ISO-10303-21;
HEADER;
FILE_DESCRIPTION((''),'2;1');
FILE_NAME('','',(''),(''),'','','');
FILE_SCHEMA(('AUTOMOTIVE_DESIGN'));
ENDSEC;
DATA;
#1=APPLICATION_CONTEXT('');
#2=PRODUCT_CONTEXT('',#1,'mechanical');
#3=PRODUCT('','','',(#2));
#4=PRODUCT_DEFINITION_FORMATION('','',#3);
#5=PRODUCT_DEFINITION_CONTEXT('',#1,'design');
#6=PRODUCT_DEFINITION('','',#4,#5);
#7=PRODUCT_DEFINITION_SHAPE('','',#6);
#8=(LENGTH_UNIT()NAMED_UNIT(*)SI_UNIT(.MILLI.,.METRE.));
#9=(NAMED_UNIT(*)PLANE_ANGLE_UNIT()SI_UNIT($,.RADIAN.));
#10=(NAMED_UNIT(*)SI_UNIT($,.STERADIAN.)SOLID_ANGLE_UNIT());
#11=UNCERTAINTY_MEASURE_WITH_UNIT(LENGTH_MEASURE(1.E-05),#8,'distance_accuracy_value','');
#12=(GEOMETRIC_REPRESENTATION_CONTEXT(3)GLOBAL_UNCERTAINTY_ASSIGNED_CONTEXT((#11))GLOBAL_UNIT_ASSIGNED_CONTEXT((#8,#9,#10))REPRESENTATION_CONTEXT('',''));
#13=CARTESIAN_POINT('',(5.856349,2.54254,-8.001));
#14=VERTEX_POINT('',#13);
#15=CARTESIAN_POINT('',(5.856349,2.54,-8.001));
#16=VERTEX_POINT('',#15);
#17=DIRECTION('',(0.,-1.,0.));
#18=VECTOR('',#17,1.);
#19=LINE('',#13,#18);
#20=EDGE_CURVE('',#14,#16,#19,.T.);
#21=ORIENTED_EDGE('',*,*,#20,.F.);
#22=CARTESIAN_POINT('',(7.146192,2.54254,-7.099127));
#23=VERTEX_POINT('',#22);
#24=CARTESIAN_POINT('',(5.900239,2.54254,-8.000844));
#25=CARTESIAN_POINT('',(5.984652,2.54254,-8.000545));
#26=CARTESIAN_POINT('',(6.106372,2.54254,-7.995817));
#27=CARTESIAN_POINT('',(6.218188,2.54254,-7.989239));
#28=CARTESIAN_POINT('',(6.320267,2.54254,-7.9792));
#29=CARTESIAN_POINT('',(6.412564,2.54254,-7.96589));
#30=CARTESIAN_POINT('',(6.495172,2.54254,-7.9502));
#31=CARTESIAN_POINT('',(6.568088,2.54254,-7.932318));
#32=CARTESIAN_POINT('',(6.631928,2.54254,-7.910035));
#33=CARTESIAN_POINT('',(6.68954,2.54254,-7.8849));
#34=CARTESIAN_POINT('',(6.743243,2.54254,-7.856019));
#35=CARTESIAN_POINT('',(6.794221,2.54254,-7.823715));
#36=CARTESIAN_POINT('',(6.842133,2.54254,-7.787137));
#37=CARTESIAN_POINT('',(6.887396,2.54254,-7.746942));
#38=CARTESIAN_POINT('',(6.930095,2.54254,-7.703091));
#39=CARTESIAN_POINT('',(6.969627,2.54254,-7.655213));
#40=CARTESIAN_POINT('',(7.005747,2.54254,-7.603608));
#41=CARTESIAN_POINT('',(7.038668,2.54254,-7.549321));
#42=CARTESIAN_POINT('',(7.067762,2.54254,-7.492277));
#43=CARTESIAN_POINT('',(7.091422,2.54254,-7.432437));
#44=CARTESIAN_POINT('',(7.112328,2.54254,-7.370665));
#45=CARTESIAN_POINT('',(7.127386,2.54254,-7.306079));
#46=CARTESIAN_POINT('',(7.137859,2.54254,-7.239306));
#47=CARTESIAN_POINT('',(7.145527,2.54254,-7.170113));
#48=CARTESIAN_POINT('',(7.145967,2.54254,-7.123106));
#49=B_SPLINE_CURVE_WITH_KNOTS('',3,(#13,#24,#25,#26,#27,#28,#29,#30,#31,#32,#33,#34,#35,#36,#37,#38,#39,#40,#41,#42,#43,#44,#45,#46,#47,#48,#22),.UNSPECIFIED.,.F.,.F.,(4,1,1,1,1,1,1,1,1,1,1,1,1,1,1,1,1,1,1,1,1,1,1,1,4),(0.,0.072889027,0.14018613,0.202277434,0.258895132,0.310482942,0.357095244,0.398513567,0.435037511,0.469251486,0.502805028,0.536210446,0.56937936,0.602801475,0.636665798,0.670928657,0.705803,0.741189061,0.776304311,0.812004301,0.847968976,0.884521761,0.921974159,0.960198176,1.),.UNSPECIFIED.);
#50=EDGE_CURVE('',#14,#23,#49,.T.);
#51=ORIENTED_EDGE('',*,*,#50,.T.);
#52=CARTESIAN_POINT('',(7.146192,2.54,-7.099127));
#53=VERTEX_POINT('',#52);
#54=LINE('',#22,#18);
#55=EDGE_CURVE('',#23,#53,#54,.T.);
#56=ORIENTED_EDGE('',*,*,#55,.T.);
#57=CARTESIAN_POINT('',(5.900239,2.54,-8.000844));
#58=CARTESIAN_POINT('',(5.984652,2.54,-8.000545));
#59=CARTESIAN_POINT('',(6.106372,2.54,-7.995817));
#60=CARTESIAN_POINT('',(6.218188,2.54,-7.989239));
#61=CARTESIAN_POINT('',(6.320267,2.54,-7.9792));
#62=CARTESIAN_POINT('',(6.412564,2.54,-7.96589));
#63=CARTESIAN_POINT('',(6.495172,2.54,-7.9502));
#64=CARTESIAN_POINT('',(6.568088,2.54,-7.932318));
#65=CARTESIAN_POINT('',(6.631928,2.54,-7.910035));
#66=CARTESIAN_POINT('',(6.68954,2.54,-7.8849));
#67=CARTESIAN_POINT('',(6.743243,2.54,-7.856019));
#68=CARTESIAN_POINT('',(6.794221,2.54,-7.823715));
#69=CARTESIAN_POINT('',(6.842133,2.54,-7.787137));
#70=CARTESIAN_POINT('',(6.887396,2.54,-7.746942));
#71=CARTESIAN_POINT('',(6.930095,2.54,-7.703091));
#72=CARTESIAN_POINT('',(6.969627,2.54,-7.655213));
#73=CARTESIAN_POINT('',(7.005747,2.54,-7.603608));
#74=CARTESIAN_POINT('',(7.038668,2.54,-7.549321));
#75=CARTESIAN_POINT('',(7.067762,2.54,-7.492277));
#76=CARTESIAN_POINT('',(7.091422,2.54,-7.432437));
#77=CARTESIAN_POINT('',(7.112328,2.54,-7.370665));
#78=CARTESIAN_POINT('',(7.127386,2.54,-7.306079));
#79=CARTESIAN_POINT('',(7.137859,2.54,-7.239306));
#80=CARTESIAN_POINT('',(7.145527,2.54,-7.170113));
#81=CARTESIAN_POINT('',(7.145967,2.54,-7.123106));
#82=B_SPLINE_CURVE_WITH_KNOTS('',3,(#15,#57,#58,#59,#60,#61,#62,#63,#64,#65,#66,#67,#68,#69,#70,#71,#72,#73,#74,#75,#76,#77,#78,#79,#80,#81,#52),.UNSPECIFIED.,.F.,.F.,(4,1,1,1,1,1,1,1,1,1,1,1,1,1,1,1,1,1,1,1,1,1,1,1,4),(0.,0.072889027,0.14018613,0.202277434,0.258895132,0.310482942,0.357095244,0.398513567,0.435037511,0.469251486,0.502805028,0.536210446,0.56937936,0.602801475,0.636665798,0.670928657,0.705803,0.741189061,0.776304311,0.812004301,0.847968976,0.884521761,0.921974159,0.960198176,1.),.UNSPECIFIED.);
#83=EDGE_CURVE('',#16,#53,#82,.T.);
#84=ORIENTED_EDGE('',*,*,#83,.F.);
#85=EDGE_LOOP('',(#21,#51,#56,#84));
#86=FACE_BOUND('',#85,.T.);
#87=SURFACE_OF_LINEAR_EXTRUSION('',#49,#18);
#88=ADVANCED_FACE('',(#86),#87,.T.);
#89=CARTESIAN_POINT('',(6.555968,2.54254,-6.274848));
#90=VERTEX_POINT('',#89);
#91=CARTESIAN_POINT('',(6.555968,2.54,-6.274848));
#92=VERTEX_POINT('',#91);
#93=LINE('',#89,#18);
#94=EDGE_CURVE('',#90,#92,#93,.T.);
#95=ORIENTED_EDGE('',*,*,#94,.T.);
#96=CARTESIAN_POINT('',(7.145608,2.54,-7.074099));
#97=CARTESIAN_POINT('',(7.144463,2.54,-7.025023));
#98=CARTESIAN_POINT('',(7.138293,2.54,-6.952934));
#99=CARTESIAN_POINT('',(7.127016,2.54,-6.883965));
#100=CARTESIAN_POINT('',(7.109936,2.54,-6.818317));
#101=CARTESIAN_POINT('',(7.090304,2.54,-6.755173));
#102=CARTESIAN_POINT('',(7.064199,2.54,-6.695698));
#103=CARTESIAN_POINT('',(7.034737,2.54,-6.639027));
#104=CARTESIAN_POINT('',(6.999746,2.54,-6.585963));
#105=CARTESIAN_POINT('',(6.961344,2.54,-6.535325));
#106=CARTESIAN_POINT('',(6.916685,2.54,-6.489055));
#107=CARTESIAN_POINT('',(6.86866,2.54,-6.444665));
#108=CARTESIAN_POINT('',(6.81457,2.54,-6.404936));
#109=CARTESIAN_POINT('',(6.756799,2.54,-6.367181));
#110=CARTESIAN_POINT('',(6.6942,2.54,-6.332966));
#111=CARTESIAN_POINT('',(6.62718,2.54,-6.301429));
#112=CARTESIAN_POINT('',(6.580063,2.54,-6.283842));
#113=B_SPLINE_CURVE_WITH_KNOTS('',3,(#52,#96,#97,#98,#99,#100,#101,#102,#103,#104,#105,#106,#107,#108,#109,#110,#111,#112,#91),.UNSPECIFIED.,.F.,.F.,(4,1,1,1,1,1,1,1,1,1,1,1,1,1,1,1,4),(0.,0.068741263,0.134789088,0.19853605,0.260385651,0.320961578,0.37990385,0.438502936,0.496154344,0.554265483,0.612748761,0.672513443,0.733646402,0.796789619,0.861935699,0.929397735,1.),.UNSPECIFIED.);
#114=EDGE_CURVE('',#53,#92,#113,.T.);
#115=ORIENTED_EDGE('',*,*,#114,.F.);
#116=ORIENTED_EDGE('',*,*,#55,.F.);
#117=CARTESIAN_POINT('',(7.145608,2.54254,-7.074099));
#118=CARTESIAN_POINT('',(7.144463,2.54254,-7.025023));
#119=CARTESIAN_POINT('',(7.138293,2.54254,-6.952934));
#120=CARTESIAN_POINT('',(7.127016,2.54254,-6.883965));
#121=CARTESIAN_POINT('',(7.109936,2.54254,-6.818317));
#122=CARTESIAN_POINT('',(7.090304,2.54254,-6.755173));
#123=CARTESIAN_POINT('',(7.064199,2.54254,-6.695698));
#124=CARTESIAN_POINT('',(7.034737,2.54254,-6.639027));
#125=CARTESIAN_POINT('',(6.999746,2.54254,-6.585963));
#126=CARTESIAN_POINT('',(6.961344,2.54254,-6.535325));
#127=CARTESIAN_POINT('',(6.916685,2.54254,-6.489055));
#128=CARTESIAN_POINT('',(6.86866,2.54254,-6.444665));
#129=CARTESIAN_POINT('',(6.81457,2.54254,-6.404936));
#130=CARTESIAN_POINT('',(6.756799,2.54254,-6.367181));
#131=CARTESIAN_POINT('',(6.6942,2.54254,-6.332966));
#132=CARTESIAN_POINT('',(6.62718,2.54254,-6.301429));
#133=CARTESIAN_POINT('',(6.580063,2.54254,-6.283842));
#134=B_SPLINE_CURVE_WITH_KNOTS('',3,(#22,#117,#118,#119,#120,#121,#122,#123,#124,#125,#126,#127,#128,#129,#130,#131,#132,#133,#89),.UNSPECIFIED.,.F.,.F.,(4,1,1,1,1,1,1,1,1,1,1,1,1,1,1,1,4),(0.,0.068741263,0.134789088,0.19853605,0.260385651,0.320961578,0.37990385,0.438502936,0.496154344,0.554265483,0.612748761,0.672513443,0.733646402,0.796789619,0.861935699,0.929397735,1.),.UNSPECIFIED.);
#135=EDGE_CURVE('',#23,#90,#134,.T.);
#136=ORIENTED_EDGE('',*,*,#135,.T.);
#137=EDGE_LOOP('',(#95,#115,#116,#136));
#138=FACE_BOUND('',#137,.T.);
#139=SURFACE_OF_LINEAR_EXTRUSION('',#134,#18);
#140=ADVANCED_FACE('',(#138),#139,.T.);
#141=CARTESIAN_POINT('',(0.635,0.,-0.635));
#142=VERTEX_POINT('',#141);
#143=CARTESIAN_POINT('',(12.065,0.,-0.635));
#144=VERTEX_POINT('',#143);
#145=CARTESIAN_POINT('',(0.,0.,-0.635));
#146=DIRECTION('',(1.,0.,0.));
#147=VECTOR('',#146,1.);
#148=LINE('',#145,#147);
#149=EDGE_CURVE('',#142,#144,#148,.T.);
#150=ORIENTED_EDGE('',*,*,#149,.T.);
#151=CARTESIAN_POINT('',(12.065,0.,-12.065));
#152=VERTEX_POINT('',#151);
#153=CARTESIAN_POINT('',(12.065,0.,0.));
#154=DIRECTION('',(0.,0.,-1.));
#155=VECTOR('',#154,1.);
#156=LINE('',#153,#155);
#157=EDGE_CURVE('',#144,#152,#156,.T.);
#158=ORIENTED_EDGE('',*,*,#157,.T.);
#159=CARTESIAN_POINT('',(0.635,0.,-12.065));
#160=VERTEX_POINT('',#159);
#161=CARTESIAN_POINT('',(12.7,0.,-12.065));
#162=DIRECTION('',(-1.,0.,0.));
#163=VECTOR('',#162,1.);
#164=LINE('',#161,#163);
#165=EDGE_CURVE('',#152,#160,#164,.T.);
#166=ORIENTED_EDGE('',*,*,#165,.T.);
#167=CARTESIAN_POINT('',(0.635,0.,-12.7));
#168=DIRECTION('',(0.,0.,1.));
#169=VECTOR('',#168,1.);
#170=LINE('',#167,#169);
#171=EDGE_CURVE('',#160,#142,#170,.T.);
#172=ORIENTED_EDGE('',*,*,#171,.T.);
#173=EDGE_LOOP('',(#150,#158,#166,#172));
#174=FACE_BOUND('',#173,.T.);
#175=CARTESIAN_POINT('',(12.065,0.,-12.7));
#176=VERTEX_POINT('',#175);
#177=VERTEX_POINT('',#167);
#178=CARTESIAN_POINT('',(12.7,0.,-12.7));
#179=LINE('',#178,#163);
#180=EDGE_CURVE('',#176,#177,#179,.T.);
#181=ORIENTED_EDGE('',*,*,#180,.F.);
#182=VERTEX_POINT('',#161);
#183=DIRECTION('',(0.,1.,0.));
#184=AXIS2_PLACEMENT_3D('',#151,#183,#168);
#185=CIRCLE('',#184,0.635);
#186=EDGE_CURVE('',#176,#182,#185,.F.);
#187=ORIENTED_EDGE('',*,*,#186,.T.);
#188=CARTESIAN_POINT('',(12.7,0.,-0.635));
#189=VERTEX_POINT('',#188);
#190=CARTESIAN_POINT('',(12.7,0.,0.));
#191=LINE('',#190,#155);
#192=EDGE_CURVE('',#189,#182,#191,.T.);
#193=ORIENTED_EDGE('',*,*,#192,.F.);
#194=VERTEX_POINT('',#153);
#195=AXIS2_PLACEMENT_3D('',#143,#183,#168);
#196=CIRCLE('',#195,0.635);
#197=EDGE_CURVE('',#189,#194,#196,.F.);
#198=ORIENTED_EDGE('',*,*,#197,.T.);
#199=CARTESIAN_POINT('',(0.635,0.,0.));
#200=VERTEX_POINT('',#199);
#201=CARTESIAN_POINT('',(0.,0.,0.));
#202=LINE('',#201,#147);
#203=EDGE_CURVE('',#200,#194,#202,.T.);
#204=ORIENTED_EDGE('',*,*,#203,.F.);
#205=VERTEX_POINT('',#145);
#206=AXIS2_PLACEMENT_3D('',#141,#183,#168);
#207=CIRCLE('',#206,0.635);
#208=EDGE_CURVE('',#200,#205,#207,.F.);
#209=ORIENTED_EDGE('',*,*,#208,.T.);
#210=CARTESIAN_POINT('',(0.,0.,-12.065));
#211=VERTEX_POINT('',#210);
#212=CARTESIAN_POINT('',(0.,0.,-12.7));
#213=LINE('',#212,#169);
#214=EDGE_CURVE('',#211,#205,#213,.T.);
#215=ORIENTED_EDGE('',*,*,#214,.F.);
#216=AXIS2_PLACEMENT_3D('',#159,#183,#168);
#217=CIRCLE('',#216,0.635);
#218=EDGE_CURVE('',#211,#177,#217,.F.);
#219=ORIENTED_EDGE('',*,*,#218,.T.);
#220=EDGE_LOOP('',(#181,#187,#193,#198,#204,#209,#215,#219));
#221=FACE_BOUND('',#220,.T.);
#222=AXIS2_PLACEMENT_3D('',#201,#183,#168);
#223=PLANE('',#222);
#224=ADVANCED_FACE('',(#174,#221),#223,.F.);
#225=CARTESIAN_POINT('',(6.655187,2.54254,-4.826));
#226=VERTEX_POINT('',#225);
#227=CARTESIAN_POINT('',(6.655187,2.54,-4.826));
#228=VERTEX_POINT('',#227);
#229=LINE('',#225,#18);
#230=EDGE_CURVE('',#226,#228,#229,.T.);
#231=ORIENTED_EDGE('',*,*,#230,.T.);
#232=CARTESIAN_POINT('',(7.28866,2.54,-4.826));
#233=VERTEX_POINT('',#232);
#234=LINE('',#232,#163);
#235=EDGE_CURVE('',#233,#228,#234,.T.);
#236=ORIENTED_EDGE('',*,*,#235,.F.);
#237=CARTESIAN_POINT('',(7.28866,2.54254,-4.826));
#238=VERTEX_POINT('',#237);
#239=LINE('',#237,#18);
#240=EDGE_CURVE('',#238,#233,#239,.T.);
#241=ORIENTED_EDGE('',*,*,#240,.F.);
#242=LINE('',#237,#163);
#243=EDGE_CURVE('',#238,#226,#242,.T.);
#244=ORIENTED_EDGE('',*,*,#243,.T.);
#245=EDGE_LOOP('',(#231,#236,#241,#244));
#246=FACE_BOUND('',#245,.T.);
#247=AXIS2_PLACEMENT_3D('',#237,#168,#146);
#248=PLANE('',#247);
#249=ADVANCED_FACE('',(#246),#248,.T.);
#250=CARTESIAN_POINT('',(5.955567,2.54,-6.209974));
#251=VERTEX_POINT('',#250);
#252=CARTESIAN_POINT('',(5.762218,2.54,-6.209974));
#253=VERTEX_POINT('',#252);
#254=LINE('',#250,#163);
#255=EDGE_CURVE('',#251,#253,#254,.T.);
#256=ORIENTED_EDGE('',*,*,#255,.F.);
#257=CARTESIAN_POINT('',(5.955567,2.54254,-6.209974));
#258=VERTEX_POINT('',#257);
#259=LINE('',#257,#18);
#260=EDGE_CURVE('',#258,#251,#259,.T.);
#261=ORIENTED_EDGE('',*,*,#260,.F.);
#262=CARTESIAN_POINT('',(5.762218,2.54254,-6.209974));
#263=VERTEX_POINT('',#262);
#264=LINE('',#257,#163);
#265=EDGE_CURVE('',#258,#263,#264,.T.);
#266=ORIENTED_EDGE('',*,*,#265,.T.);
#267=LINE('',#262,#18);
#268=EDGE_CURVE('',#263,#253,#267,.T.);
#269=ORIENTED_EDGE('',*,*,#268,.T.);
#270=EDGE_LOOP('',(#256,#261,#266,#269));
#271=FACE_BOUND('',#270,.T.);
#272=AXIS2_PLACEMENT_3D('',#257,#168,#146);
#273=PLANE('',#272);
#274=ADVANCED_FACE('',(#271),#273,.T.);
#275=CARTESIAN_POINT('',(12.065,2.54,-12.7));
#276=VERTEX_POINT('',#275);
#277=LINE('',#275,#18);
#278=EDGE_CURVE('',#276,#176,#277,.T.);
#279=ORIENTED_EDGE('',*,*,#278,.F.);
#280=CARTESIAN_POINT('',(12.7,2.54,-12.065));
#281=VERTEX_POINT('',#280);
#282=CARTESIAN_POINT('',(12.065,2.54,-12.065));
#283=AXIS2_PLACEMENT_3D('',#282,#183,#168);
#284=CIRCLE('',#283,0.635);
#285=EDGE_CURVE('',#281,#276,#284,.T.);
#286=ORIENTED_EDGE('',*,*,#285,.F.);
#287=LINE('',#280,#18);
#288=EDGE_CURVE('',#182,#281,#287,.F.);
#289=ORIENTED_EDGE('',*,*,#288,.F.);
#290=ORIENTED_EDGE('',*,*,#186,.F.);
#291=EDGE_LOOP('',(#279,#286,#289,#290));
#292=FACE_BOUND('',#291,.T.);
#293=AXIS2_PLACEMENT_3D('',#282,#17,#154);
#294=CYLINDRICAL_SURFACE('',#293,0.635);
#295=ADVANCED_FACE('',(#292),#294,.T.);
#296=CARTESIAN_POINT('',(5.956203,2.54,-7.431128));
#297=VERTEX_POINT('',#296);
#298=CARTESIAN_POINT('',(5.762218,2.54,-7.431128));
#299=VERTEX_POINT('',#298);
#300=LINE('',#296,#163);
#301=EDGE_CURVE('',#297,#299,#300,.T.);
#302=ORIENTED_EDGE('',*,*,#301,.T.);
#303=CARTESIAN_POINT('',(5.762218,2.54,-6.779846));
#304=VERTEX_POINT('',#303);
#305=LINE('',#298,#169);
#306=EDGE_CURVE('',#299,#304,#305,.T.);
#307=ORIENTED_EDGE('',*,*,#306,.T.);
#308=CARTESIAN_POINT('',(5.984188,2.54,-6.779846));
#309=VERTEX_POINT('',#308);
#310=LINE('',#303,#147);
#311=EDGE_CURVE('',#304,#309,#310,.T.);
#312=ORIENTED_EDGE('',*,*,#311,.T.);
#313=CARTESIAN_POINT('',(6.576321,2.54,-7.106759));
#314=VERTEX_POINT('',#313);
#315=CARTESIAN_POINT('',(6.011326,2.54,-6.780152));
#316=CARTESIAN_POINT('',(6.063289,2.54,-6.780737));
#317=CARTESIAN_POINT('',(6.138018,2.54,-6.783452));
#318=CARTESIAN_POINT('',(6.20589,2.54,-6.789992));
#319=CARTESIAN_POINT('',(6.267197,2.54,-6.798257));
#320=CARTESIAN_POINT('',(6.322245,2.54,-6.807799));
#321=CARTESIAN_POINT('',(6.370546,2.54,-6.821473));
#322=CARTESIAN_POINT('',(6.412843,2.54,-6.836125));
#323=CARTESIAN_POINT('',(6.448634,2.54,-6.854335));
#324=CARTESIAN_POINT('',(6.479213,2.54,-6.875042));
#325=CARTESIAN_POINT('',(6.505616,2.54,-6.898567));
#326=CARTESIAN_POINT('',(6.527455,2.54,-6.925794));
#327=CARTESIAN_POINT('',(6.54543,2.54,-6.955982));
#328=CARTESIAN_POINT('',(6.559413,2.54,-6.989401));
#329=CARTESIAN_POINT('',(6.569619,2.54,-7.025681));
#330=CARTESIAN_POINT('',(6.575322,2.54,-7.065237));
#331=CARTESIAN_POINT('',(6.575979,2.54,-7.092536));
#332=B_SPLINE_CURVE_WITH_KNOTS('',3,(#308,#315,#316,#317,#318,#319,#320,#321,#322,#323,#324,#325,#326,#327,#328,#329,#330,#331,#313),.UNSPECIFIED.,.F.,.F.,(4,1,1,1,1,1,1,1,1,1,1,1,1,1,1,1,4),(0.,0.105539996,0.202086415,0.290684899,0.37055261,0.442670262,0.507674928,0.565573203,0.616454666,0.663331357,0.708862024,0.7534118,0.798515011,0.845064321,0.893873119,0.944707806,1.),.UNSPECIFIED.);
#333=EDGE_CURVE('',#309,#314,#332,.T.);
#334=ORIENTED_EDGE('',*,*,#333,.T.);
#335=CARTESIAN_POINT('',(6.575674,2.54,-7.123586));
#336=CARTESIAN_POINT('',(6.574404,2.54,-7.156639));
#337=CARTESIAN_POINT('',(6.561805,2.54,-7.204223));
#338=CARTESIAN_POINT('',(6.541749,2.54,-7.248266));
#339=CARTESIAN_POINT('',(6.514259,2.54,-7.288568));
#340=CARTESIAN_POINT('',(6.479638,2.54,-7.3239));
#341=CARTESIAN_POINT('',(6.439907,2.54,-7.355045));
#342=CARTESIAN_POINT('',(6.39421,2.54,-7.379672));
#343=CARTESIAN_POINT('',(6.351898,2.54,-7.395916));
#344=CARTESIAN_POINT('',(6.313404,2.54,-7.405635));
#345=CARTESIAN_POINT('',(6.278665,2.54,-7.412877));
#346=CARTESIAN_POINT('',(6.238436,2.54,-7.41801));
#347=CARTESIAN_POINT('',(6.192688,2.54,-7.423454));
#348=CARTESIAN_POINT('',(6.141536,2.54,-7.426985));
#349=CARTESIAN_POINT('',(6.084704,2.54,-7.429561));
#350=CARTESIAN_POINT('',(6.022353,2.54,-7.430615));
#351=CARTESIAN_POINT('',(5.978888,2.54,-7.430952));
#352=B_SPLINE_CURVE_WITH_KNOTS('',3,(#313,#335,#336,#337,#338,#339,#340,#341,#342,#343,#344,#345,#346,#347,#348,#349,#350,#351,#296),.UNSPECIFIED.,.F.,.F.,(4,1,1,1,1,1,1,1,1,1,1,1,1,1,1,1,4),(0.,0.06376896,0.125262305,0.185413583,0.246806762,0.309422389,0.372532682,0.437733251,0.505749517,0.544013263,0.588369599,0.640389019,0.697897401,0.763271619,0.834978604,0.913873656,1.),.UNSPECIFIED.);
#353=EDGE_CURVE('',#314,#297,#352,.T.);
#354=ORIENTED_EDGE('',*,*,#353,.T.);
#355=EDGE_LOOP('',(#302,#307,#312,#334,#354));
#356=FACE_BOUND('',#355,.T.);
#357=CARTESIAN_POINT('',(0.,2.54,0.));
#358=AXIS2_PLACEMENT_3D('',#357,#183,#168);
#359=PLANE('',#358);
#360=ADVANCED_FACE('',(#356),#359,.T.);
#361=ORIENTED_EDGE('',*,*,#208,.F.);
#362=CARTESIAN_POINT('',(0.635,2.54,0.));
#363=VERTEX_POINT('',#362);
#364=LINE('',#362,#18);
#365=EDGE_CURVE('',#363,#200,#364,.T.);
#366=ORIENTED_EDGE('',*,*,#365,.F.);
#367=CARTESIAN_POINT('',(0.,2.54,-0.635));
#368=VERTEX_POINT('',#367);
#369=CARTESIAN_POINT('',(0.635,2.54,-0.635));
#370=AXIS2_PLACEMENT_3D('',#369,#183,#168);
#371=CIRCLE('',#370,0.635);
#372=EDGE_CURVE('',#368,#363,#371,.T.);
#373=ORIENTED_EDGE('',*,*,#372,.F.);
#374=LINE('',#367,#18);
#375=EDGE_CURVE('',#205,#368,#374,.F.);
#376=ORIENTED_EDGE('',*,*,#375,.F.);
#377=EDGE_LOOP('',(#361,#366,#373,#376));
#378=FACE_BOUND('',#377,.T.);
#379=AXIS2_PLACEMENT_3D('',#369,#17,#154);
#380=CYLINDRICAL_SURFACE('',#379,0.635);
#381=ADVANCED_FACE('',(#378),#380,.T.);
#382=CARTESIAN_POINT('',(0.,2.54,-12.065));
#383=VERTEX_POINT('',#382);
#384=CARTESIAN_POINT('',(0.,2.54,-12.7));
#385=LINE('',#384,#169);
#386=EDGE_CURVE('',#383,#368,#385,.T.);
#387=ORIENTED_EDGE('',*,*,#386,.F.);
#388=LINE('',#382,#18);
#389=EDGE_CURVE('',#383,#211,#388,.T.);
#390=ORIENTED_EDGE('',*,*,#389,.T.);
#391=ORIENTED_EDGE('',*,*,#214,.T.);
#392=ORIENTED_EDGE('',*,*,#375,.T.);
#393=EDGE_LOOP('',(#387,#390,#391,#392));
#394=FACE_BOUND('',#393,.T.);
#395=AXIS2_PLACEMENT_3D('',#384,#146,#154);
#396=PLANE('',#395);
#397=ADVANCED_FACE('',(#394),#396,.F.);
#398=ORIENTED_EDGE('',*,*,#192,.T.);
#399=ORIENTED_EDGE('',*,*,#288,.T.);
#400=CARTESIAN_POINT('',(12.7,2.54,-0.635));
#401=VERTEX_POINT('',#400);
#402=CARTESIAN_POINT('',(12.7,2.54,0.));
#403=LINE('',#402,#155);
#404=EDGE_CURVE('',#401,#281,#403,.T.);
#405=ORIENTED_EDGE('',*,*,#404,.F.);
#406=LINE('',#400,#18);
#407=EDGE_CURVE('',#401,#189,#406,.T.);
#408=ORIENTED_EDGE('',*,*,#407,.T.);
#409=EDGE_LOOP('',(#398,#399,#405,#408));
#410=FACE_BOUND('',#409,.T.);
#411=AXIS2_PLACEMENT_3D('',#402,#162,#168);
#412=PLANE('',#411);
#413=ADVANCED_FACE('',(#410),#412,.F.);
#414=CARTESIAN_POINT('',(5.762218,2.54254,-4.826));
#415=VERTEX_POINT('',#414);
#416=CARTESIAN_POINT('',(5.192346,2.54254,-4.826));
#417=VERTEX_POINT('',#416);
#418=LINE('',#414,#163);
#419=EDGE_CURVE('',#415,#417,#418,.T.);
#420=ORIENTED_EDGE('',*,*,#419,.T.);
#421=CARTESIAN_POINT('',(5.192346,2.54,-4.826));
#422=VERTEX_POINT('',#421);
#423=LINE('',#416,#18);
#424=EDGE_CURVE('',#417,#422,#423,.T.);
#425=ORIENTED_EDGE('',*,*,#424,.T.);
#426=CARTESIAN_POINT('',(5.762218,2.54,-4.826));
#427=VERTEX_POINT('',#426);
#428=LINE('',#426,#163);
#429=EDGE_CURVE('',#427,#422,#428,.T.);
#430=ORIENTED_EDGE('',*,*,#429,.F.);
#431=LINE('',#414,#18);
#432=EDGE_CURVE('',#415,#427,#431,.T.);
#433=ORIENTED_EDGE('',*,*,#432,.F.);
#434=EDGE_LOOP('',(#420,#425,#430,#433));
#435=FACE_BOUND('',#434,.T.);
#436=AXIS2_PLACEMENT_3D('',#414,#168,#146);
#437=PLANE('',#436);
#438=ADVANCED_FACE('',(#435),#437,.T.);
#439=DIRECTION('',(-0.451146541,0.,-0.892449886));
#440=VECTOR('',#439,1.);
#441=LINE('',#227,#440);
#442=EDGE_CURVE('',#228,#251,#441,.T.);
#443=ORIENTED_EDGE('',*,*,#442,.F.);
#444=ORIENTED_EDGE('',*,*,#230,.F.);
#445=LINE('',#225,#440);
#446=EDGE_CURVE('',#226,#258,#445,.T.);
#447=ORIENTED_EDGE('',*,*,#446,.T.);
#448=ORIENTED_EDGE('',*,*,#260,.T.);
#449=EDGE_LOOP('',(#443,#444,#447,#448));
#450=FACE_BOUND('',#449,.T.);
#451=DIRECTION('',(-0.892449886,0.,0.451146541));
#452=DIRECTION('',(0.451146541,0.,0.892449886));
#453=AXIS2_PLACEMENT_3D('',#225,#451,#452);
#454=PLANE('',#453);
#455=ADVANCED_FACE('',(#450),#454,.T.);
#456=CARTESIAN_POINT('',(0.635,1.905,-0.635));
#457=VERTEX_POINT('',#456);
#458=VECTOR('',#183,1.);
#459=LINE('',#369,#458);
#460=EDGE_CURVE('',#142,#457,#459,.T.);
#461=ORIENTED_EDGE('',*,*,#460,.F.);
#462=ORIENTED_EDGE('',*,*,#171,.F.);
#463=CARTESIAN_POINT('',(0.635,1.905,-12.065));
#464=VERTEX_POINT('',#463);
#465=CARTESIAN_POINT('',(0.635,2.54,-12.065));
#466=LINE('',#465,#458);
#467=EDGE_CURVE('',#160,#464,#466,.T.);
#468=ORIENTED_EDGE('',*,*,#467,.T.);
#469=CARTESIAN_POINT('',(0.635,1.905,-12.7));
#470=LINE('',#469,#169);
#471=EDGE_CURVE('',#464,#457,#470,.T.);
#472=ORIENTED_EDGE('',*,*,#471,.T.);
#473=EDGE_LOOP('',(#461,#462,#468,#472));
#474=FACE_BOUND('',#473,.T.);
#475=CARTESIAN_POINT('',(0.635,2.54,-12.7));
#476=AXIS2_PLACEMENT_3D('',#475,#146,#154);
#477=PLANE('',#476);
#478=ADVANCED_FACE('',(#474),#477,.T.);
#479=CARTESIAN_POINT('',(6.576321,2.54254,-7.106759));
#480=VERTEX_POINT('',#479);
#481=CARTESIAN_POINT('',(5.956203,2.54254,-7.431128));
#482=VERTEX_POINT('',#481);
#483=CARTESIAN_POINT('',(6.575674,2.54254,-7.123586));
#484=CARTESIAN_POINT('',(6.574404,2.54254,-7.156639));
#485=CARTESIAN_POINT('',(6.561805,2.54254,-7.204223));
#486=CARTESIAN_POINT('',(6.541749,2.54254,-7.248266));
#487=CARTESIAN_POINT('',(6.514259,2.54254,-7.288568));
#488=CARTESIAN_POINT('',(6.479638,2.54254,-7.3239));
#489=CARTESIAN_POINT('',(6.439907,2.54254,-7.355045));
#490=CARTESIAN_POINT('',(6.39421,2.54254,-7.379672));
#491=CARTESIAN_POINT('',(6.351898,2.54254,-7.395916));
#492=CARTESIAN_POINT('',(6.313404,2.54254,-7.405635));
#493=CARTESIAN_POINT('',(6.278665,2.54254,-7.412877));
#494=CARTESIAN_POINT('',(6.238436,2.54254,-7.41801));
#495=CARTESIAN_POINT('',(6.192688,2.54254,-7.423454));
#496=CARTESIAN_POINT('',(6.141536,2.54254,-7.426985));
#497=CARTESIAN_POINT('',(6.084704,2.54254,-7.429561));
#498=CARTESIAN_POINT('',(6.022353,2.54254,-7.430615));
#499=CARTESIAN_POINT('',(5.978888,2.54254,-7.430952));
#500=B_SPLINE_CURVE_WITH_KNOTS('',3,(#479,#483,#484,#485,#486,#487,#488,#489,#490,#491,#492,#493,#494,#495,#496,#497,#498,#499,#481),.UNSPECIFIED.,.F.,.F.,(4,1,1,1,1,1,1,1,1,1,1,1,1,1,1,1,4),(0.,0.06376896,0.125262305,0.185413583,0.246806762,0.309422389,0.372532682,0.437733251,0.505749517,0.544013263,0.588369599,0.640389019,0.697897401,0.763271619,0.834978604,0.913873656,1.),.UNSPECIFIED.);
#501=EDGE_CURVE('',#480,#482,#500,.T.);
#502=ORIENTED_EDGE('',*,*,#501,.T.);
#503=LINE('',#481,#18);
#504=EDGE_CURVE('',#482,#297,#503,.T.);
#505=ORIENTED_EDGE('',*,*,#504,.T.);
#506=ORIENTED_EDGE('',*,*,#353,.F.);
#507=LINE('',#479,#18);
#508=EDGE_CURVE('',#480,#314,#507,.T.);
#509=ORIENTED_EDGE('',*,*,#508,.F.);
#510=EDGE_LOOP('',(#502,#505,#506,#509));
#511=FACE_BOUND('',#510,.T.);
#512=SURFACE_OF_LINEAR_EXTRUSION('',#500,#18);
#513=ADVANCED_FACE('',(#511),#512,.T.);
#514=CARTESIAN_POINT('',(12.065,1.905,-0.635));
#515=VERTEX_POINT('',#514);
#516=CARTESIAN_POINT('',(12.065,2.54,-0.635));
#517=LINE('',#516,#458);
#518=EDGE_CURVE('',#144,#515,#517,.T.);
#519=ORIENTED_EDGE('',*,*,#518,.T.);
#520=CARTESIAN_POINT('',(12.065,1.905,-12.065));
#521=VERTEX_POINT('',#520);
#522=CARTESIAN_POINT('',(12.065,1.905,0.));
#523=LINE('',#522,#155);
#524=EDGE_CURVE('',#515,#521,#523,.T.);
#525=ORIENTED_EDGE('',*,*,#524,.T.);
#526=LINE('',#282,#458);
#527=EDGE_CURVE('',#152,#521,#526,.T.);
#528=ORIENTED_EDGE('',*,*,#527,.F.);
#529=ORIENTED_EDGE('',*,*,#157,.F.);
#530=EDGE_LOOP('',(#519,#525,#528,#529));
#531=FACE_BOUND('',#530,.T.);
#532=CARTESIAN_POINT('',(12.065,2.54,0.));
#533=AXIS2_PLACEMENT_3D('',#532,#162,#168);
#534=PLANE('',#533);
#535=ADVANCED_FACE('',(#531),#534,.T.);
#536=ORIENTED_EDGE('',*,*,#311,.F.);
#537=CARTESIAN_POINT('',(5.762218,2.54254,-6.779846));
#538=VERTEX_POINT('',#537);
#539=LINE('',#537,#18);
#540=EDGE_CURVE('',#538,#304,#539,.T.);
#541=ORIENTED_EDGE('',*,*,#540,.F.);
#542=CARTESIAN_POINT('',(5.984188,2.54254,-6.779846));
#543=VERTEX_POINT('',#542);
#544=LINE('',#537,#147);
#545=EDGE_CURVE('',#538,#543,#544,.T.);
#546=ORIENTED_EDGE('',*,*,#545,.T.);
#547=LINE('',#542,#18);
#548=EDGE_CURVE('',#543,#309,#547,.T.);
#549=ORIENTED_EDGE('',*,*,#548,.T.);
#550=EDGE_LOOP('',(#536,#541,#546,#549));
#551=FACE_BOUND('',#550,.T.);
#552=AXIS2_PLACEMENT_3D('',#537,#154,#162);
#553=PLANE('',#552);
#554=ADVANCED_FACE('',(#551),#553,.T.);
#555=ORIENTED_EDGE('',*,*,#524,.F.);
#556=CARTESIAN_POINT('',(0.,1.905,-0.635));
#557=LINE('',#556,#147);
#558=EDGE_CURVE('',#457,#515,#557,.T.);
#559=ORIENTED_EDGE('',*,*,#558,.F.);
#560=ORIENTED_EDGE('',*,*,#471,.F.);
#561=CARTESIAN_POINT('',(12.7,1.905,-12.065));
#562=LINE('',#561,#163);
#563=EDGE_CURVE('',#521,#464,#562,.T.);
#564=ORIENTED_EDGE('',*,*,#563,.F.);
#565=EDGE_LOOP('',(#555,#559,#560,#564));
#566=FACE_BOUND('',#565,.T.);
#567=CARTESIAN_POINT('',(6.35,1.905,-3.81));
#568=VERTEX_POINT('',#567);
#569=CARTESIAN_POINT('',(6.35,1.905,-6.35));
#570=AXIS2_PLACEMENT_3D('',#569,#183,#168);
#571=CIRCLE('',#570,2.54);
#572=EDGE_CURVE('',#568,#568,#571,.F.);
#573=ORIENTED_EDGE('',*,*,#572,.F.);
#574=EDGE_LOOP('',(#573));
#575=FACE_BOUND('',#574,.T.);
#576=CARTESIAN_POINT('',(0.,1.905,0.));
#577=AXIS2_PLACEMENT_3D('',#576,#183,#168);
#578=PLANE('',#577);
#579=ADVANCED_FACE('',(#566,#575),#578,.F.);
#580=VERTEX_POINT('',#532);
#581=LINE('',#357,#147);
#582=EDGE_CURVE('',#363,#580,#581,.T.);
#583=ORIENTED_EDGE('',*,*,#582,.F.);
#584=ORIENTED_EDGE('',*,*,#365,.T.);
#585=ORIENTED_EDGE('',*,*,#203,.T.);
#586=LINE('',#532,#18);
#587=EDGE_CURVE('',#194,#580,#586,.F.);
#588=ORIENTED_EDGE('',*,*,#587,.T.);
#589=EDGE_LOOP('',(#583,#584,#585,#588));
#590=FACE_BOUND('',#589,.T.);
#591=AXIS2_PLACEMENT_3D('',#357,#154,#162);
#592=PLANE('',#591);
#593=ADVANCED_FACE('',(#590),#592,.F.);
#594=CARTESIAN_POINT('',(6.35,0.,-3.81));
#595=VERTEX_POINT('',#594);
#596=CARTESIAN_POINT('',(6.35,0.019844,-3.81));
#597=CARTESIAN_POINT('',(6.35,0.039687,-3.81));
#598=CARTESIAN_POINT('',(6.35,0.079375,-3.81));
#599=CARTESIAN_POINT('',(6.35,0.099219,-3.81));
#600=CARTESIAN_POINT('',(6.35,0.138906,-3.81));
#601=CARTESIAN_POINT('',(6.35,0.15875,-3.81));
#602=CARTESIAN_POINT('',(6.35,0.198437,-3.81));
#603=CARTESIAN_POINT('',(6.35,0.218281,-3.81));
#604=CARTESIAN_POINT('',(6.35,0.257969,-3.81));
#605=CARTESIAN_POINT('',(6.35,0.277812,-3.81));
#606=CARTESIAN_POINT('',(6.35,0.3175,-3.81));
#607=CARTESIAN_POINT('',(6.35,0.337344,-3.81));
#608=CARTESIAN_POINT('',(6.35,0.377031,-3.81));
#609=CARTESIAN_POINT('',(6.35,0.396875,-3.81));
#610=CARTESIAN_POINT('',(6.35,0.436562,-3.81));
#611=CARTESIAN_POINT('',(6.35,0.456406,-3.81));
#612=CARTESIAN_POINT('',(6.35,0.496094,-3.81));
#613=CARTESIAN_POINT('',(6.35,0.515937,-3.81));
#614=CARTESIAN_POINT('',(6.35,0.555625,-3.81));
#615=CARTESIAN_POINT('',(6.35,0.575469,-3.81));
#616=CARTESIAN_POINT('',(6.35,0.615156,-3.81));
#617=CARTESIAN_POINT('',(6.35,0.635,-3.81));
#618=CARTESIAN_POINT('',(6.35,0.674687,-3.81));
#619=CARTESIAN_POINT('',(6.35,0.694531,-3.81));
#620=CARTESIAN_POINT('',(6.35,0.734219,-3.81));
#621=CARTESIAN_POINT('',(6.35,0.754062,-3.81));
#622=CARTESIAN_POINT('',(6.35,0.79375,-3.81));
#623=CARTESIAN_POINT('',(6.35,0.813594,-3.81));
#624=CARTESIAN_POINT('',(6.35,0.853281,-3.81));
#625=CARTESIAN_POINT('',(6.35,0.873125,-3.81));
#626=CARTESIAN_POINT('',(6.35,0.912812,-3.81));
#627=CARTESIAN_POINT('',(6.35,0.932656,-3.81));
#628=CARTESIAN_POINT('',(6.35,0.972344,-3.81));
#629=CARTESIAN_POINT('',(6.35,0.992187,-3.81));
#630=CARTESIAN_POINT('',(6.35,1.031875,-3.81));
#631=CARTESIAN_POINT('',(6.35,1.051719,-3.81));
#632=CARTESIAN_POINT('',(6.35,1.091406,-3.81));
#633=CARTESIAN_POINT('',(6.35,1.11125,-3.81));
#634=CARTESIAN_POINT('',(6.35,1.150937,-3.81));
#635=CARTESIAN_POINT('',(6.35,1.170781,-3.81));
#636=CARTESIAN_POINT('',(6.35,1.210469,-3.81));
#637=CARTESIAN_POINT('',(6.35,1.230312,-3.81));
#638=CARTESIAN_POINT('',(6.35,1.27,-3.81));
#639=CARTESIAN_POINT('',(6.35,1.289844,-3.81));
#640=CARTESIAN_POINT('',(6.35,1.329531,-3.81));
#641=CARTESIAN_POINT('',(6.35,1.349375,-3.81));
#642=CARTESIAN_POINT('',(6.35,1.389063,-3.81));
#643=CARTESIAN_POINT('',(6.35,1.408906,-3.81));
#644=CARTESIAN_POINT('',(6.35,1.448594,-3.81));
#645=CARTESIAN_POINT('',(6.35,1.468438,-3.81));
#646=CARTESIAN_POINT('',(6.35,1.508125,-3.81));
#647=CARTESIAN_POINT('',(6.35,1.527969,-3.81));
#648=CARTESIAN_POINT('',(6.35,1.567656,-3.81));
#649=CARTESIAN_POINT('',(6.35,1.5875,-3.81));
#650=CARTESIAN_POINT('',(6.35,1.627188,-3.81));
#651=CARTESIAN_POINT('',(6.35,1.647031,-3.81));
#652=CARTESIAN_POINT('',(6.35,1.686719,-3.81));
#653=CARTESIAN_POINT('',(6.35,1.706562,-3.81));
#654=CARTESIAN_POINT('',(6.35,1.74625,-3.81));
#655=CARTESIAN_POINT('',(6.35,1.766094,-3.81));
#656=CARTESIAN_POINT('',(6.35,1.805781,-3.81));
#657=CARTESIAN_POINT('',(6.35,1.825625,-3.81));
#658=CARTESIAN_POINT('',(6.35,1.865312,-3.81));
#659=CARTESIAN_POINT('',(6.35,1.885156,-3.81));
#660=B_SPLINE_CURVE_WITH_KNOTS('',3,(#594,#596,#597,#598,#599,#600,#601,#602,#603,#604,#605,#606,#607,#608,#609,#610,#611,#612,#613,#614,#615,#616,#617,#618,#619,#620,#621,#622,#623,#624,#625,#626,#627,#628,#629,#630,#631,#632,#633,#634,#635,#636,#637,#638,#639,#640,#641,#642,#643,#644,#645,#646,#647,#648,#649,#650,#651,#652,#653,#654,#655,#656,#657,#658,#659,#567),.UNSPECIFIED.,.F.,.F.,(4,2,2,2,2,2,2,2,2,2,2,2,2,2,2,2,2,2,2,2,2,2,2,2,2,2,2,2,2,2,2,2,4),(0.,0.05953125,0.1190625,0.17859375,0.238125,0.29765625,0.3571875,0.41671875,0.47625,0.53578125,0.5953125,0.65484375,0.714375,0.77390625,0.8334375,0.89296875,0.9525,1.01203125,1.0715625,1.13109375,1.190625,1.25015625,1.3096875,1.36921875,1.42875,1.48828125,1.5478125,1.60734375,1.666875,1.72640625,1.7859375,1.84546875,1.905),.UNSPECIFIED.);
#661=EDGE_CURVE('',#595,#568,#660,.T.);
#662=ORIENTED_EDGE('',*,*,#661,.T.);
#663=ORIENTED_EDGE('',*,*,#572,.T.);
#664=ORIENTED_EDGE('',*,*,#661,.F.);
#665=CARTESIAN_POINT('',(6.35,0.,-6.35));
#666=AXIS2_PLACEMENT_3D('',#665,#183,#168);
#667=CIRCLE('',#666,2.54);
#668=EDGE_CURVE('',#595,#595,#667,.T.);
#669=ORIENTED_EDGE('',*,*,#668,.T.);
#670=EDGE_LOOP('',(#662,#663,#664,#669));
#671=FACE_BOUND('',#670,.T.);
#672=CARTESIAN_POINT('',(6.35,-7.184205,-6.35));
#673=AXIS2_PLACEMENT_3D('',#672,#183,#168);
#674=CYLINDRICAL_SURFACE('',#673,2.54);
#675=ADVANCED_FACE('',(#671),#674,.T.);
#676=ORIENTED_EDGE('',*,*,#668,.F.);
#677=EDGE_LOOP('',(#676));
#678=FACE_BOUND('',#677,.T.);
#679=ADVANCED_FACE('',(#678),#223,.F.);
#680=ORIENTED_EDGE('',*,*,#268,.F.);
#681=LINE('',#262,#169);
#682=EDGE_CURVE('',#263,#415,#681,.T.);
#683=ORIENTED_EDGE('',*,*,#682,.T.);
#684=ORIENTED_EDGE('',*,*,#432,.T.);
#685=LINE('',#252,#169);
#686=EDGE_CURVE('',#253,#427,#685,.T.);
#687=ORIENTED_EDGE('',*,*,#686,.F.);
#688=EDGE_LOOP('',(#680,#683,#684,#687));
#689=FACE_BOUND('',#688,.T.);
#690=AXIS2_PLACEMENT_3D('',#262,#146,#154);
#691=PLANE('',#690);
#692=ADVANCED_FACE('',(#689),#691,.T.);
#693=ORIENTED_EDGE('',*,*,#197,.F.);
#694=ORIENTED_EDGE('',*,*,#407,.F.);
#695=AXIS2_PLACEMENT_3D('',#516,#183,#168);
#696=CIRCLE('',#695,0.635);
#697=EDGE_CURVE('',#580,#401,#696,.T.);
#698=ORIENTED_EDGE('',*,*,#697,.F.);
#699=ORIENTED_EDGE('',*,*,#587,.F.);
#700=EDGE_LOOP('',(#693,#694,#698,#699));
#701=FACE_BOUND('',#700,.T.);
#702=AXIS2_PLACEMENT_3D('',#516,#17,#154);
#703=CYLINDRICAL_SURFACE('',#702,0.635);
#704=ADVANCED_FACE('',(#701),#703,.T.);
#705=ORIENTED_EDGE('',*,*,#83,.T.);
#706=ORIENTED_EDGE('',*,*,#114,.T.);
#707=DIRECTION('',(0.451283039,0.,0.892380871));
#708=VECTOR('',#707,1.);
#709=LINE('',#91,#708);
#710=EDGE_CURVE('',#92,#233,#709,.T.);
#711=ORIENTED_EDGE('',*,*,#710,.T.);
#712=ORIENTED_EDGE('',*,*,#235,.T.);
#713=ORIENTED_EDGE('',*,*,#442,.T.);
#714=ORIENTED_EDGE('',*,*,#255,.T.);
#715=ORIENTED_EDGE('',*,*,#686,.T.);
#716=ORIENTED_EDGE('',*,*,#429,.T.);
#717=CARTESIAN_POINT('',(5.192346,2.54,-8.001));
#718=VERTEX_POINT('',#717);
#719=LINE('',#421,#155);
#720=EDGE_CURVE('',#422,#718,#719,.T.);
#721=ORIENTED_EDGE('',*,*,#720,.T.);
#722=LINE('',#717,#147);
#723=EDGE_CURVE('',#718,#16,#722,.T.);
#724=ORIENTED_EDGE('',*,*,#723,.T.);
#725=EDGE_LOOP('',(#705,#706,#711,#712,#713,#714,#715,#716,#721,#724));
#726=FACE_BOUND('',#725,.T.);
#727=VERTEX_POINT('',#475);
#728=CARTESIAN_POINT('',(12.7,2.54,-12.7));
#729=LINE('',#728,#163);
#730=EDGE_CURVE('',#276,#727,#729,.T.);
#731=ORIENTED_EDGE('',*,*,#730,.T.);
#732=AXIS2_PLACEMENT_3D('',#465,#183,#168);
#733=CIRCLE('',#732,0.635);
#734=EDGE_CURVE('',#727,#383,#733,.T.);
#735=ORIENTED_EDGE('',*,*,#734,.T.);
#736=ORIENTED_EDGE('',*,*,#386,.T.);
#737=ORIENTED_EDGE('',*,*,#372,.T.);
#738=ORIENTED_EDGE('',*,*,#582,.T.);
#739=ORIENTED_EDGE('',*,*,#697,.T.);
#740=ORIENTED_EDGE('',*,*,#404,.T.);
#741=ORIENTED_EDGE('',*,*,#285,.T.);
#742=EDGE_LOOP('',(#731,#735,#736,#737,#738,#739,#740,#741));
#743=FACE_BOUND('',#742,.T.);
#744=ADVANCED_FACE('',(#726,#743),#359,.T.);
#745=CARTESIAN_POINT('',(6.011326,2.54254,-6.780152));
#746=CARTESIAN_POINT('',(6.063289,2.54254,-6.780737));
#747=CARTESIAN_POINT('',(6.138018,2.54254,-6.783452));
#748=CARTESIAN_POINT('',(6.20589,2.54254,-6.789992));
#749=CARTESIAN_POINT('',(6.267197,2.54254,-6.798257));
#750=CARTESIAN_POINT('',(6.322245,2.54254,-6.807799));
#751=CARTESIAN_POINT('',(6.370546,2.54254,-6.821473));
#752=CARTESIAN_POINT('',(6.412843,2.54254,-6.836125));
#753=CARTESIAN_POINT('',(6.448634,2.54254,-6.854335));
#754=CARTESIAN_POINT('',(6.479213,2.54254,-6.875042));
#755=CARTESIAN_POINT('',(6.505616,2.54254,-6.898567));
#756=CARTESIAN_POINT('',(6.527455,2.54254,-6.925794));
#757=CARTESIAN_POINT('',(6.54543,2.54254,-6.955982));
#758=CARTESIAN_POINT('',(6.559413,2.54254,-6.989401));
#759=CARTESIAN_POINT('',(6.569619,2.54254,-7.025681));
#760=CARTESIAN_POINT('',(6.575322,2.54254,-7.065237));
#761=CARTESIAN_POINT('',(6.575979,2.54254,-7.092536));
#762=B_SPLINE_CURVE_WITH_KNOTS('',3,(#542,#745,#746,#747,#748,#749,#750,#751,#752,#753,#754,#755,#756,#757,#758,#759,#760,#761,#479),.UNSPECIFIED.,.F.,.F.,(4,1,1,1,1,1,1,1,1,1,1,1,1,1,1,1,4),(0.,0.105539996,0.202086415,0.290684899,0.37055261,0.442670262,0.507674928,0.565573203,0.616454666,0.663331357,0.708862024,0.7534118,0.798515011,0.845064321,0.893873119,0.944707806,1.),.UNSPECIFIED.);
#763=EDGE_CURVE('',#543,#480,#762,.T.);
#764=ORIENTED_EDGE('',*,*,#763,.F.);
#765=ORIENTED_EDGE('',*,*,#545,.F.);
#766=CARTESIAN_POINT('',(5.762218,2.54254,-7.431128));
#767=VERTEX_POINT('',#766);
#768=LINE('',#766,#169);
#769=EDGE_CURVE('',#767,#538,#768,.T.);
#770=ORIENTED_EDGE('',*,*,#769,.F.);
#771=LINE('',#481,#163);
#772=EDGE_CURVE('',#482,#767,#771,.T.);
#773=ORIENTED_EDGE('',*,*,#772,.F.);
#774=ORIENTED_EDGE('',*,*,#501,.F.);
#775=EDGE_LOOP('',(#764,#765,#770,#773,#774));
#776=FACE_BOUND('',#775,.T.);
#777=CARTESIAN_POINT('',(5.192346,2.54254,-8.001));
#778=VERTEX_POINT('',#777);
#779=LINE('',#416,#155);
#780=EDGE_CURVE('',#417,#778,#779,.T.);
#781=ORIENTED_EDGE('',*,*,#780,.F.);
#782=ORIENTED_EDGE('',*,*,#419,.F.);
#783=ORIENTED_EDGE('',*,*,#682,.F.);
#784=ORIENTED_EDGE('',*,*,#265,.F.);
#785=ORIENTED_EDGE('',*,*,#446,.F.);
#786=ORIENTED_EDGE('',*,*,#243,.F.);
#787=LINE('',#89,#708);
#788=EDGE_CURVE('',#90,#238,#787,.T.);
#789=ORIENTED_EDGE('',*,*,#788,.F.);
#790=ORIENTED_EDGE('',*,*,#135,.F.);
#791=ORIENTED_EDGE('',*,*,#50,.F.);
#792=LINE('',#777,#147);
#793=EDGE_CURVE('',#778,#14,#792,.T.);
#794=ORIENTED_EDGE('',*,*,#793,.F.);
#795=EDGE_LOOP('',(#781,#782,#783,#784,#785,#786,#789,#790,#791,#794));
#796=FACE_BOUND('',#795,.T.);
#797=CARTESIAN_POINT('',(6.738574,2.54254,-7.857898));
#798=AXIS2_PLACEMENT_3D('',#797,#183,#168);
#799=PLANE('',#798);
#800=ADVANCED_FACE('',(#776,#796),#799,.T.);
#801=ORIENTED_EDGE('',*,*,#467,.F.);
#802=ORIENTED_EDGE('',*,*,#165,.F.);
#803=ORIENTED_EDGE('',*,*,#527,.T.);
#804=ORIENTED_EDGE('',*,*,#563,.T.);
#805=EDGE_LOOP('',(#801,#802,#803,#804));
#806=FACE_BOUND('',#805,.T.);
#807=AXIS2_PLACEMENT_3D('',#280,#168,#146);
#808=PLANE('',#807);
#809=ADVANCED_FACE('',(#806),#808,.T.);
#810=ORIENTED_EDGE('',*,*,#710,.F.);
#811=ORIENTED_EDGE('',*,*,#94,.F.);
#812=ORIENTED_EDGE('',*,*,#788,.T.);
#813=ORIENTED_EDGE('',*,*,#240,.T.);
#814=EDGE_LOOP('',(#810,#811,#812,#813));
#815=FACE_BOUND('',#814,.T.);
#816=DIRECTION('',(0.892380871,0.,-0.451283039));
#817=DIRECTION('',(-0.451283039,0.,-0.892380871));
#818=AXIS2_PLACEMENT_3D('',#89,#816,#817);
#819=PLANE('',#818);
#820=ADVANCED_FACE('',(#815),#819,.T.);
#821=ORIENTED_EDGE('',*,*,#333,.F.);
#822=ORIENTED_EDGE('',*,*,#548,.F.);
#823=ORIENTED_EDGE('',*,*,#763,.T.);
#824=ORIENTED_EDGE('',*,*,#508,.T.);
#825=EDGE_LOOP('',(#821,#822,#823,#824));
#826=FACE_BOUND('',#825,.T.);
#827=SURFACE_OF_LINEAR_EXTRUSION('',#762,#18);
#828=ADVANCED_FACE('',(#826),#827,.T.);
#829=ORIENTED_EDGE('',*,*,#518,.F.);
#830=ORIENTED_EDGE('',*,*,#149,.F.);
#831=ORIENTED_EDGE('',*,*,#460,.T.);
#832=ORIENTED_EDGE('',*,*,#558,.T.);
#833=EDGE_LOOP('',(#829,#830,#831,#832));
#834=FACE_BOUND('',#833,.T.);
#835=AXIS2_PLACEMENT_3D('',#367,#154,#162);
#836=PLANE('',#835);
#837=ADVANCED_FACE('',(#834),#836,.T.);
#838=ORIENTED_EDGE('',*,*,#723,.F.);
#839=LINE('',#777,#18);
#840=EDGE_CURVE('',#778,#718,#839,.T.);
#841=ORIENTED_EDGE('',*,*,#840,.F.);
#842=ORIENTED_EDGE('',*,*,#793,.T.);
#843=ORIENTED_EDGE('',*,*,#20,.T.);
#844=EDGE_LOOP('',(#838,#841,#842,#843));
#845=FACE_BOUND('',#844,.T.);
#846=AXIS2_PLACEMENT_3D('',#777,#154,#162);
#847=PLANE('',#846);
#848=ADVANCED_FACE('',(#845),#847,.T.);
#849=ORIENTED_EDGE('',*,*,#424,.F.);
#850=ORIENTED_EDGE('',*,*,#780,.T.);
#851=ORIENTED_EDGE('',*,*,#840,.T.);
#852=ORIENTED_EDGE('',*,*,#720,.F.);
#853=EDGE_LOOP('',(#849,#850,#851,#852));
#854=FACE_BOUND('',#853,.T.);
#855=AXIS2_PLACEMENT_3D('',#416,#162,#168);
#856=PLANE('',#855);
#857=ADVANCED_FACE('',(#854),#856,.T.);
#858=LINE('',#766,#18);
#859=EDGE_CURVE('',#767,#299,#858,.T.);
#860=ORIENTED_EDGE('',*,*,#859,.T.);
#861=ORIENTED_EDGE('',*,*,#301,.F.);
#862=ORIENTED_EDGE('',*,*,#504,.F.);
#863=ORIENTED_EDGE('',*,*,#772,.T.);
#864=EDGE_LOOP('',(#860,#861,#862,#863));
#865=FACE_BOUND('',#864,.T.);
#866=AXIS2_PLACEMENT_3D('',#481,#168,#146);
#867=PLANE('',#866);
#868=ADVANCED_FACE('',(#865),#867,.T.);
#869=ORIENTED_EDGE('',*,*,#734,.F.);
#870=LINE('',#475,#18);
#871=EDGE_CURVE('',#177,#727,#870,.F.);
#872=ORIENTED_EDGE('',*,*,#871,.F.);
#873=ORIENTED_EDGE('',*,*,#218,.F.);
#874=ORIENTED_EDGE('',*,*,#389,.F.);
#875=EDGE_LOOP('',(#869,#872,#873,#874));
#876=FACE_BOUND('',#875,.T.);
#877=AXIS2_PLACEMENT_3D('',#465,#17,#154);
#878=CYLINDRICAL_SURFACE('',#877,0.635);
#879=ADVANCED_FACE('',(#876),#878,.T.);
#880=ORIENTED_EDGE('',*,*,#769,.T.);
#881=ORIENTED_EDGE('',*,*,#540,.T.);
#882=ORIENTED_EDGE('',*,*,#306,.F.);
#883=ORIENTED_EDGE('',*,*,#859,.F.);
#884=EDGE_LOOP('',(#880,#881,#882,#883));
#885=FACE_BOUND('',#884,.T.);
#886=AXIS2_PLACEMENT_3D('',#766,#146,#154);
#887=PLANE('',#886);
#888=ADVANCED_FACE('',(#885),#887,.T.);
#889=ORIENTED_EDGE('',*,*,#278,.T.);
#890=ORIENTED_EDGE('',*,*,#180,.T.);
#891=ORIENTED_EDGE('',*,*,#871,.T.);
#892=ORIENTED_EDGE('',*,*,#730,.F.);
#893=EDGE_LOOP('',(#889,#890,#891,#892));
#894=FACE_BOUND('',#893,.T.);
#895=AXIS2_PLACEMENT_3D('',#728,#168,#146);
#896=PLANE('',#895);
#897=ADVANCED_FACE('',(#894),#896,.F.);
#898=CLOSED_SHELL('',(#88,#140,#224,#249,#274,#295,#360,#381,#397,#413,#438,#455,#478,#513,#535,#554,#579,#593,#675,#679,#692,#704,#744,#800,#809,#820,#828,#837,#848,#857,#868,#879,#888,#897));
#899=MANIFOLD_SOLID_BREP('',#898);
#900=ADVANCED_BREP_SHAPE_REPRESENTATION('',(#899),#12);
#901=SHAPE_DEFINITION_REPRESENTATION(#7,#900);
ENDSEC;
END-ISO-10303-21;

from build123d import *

# Parameters (mm, degrees)
SKETCH1_W           = 12.7
SKETCH1_H           = 12.7
BOSS_EXTRUDE1_DEPTH = 2.54
FILLET1_R           = 0.635
SHELL1_START        = 0.635
SHELL1_OUTLINE_W    = 1.905
SHELL1_OUTLINE_H    = 11.43
SHELL1_DEPTH        = 11.43
SKETCH2_R           = 2.54
BOSS_EXTRUDE2_DEPTH = 1.905
BOSS_EXTRUDE3_DEPTH = 0.00254


# Read off the part's stored shape, not the designer's step: Shell1
with BuildPart() as part:
    # Sketch1 → Boss-Extrude1 (new body)
    with BuildSketch(Plane(origin=(0, 0, 0), x_dir=(1, 0, 0), z_dir=(0, 1, 0))):
        with Locations((6.35, 6.35)):
            Rectangle(SKETCH1_W, SKETCH1_H)
    extrude(amount=BOSS_EXTRUDE1_DEPTH)

    # Fillet1
    fillet1_edges = [part.edges().sort_by_distance(p)[0] for p in [
        (0, 1.27, -12.7),
        (12.7, 1.27, -12.7),
        (12.7, 1.27, 0),
        (0, 1.27, 0),
    ]]
    fillet(fillet1_edges, radius=FILLET1_R)

    # Shell1 outline → Shell1 (cut)
    with BuildSketch(Plane.YZ.offset(SHELL1_START)):
        with Locations((0.9525, -6.35)):
            Rectangle(SHELL1_OUTLINE_W, SHELL1_OUTLINE_H)
    extrude(amount=SHELL1_DEPTH, mode=Mode.SUBTRACT)

    # Sketch2 → Boss-Extrude2 (add)
    with BuildSketch(Plane(origin=(0, 1.905, 0), x_dir=(-1, 0, 0), z_dir=(0, -1, 0))):
        with Locations(Location((-6.35, 6.35, 0), (0, 0, 270))):
            Circle(SKETCH2_R)
    extrude(amount=BOSS_EXTRUDE2_DEPTH)

    # Sketch3 → Boss-Extrude3 (add)
    with BuildSketch(Plane(origin=(0, 2.54, 0), x_dir=(1, 0, 0), z_dir=(0, 1, 0))):
        with BuildLine():
            Line((5.192346154, 8.001), (5.856348558, 8.001))
            add(Edge.make_bspline(
                [(5.856348558, 8.001), (5.900238914, 8.000844214), (5.984652434, 8.000544595), (6.106372118, 7.995817392), (6.218188387, 7.989239101), (6.320266796, 7.979200455), (6.412563672, 7.965890424), (6.49517152, 7.950200099), (6.568087924, 7.93231761), (6.631927834, 7.910034619), (6.689540196, 7.884899742), (6.743242928, 7.856019307), (6.79422079, 7.823714908), (6.842133051, 7.787136528), (6.887396081, 7.746942202), (6.93009527, 7.703091473), (6.969627239, 7.655212502), (7.005747205, 7.603607826), (7.038667646, 7.54932089), (7.067762412, 7.492277157), (7.091422324, 7.432436959), (7.112328392, 7.370665114), (7.127386356, 7.306078583), (7.13785895, 7.239306125), (7.145526573, 7.170112696), (7.145967424, 7.123105753), (7.146192308, 7.099127003)],
                knots=[0, 0, 0, 0, 1.749336639, 3.364467119, 4.854658419, 6.213483162, 7.451590619, 8.570285859, 9.5643256, 10.440900261, 11.26203566, 12.067320669, 12.869050712, 13.665104639, 14.467235401, 15.27997916, 16.102287765, 16.939272006, 17.78853747, 18.631303466, 19.488103222, 20.351255419, 21.228522269, 22.127379805, 23.044756219, 24, 24, 24, 24], degree=3))
            add(Edge.make_bspline(
                [(7.146192308, 7.099127003), (7.145608142, 7.074098697), (7.1444627, 7.025022751), (7.138292723, 6.952934188), (7.127015945, 6.883964894), (7.109935624, 6.818316801), (7.090304013, 6.755172843), (7.064199007, 6.695698066), (7.034736927, 6.639027495), (6.999745675, 6.585962756), (6.961344486, 6.535325176), (6.916684711, 6.489054868), (6.868659617, 6.444664978), (6.814569539, 6.404935939), (6.756798818, 6.367181417), (6.694199611, 6.332965765), (6.627180461, 6.301428881), (6.580062679, 6.283841737), (6.555967949, 6.274848157)],
                knots=[0, 0, 0, 0, 1.099860209, 2.156625411, 3.176576793, 4.16617041, 5.135385252, 6.078461593, 7.016046972, 7.938469504, 8.868247731, 9.803980173, 10.76021508, 11.73834243, 12.748633912, 13.790971185, 14.870363756, 16, 16, 16, 16], degree=3))
            Line((6.555967949, 6.274848157), (7.288660256, 4.826))
            Line((7.288660256, 4.826), (6.655186699, 4.826))
            Line((6.655186699, 4.826), (5.955567308, 6.209974359))
            Line((5.955567308, 6.209974359), (5.762217949, 6.209974359))
            Line((5.762217949, 6.209974359), (5.762217949, 4.826))
            Line((5.762217949, 4.826), (5.192346154, 4.826))
            Line((5.192346154, 4.826), (5.192346154, 8.001))
        make_face()
        with BuildLine():
            Line((5.762217949, 6.779846154), (5.984188101, 6.779846154))
            add(Edge.make_bspline(
                [(5.984188101, 6.779846154), (6.011325797, 6.780151797), (6.063288654, 6.780737037), (6.138018068, 6.783451626), (6.205890197, 6.789992443), (6.267196508, 6.798256521), (6.322245489, 6.807798593), (6.370546122, 6.82147296), (6.412842646, 6.836125392), (6.448633846, 6.854334563), (6.479213025, 6.87504234), (6.505616188, 6.898566889), (6.52745539, 6.92579356), (6.545430168, 6.955982448), (6.55941259, 6.989400567), (6.569618687, 7.025681062), (6.575322386, 7.065237214), (6.575978616, 7.092536345), (6.576320513, 7.106759215)],
                knots=[0, 0, 0, 0, 1.688639943, 3.233382647, 4.650958383, 5.928841754, 7.082724185, 8.122798841, 9.049171256, 9.863274652, 10.613301712, 11.341792392, 12.054588806, 12.776240173, 13.521029143, 14.301969904, 15.115324896, 16, 16, 16, 16], degree=3))
            add(Edge.make_bspline(
                [(6.576320513, 7.106759215), (6.575674126, 7.123585908), (6.57440442, 7.15663883), (6.561804988, 7.204223447), (6.541749414, 7.248266266), (6.514258716, 7.28856829), (6.479637754, 7.323899827), (6.43990747, 7.355044858), (6.394210387, 7.379672018), (6.351898327, 7.39591583), (6.313404242, 7.405634671), (6.278664546, 7.412877065), (6.238435767, 7.418009958), (6.192687537, 7.423454304), (6.14153647, 7.426984687), (6.08470376, 7.429561163), (6.022352631, 7.430615326), (5.978887972, 7.430952323), (5.956203325, 7.431128205)],
                knots=[0, 0, 0, 0, 1.020303359, 2.004196876, 2.966617323, 3.9489082, 4.950758222, 5.960522915, 7.003732012, 8.091992268, 8.70421221, 9.413913587, 10.24622431, 11.166358409, 12.212345909, 13.359657661, 14.621978493, 16, 16, 16, 16], degree=3))
            Line((5.956203325, 7.431128205), (5.762217949, 7.431128205))
            Line((5.762217949, 7.431128205), (5.762217949, 6.779846154))
        make_face(mode=Mode.SUBTRACT)
    extrude(amount=BOSS_EXTRUDE3_DEPTH)


solid = part.part
